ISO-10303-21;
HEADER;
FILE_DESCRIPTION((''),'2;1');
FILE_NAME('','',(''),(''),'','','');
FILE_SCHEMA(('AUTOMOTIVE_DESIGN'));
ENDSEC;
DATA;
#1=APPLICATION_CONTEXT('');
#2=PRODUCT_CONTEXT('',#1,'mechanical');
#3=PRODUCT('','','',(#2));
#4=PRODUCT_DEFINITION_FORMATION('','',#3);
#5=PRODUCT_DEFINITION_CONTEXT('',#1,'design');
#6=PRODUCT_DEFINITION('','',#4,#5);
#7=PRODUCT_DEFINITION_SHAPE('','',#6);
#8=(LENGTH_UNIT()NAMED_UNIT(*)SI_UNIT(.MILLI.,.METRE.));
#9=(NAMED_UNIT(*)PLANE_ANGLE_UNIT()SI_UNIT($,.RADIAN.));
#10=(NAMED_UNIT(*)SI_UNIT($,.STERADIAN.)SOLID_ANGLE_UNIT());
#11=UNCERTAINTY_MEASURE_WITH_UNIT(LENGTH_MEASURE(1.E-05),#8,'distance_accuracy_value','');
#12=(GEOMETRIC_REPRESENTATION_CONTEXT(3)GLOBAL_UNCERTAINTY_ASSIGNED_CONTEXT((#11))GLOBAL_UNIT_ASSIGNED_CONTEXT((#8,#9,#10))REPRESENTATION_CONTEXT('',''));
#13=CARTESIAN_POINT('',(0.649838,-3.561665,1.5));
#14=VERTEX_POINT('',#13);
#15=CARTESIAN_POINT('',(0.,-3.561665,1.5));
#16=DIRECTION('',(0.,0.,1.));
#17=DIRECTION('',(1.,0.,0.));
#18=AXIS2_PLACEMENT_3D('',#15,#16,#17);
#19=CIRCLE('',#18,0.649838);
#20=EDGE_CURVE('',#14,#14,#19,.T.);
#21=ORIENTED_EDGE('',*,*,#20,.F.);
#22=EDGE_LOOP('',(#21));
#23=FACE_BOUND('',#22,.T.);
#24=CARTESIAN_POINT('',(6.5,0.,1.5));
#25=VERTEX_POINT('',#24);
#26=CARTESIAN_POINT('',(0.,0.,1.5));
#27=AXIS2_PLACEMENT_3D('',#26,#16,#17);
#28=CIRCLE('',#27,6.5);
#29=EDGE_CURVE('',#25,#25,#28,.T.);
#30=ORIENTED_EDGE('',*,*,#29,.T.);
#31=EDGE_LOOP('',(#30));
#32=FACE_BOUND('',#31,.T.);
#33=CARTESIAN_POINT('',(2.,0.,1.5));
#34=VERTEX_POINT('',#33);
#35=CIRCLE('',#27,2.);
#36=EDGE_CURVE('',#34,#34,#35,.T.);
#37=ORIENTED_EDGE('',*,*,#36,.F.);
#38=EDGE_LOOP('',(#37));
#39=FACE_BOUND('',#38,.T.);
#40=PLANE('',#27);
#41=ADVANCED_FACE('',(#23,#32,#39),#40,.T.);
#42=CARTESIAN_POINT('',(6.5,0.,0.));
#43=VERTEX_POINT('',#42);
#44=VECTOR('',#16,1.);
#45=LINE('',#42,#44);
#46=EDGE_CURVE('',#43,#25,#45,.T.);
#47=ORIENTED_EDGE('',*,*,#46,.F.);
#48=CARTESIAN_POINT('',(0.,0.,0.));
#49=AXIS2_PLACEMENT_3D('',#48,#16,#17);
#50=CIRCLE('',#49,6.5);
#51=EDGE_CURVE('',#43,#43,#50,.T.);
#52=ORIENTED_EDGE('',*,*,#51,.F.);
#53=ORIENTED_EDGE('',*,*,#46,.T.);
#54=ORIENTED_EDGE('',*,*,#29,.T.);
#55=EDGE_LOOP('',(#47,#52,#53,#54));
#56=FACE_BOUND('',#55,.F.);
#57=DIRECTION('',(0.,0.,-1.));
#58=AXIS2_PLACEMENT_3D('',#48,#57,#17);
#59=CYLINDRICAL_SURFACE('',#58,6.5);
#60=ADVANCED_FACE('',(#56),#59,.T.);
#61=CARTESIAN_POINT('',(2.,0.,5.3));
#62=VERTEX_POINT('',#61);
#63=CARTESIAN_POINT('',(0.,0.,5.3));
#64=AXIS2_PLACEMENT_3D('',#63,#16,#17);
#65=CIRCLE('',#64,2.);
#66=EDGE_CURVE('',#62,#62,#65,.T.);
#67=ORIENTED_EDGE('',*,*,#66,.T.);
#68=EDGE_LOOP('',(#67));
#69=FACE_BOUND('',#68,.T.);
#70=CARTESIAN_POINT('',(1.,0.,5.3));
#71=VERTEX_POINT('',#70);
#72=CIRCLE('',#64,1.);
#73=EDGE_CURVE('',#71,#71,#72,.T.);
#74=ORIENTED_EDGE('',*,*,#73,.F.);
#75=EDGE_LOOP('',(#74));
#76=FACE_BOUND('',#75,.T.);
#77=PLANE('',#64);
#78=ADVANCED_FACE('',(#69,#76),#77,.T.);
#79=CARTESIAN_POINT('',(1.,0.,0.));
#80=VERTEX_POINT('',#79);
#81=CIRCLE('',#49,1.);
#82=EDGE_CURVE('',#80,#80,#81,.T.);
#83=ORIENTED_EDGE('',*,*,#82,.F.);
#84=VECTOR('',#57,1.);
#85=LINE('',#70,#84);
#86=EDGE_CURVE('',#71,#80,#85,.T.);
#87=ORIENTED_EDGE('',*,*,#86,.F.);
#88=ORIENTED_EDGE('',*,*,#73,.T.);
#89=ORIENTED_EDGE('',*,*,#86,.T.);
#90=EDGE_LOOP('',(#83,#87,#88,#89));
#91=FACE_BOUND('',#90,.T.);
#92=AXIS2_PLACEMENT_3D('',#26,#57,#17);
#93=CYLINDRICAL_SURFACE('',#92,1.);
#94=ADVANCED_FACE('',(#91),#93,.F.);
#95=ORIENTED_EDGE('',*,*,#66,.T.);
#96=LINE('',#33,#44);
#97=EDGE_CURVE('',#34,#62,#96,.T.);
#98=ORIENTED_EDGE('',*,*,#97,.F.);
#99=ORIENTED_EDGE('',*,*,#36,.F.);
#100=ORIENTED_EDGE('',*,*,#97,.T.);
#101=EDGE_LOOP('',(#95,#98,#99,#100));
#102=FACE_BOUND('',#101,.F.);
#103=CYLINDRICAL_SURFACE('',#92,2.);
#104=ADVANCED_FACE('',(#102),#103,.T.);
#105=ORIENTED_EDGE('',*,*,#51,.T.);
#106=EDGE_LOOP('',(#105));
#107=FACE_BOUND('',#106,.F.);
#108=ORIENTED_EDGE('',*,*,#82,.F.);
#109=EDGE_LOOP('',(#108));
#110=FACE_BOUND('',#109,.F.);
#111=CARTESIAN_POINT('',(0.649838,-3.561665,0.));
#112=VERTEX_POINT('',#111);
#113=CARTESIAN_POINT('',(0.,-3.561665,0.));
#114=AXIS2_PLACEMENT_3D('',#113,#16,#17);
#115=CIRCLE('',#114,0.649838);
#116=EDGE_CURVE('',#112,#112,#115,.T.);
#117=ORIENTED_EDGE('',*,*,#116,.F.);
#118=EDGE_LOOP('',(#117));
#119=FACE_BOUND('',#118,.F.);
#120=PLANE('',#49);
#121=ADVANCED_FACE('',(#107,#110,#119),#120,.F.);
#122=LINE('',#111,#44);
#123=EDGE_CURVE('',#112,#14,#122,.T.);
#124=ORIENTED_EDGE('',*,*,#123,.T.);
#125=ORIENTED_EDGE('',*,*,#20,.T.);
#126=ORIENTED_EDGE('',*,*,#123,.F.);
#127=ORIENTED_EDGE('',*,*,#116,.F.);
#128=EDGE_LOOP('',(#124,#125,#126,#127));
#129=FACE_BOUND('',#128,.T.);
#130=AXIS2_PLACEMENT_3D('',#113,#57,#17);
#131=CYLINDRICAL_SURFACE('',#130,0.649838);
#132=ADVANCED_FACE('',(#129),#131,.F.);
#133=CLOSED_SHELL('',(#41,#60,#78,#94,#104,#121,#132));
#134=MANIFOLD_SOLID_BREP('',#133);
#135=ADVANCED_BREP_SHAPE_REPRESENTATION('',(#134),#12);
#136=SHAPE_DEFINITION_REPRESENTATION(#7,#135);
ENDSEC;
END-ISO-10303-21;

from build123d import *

# Parameters (mm, degrees)
F0_R     = 6.5
F0_R_2   = 1
F1_DEPTH = 1.5
F2_R     = 2
F2_R_2   = 1
F3_DEPTH = 3.8
F4_R     = 0.6498381819
F5_DEPTH = 1.5


# Not quite as in the source:
# - a feature names something its author has since deleted; it is built from what else it names


with BuildPart() as f1:
    # F0 (on Top) → F1 (new body)
    with BuildSketch(Plane.XY):
        Circle(F0_R)
        Circle(F0_R_2, mode=Mode.SUBTRACT)
    extrude(amount=F1_DEPTH)

    # F2 (on face) → F3 (join)
    with BuildSketch(Plane.XY.offset(1.5)):
        Circle(F2_R)
        Circle(F2_R_2, mode=Mode.SUBTRACT)
    extrude(amount=F3_DEPTH)

    # F4 (on Top) → F5 (cut, through all)
    with BuildSketch(Plane.XY):
        with Locations((0, -3.5616646055)):
            Circle(F4_R)
    extrude(amount=F5_DEPTH, mode=Mode.SUBTRACT)


solid = f1.part
